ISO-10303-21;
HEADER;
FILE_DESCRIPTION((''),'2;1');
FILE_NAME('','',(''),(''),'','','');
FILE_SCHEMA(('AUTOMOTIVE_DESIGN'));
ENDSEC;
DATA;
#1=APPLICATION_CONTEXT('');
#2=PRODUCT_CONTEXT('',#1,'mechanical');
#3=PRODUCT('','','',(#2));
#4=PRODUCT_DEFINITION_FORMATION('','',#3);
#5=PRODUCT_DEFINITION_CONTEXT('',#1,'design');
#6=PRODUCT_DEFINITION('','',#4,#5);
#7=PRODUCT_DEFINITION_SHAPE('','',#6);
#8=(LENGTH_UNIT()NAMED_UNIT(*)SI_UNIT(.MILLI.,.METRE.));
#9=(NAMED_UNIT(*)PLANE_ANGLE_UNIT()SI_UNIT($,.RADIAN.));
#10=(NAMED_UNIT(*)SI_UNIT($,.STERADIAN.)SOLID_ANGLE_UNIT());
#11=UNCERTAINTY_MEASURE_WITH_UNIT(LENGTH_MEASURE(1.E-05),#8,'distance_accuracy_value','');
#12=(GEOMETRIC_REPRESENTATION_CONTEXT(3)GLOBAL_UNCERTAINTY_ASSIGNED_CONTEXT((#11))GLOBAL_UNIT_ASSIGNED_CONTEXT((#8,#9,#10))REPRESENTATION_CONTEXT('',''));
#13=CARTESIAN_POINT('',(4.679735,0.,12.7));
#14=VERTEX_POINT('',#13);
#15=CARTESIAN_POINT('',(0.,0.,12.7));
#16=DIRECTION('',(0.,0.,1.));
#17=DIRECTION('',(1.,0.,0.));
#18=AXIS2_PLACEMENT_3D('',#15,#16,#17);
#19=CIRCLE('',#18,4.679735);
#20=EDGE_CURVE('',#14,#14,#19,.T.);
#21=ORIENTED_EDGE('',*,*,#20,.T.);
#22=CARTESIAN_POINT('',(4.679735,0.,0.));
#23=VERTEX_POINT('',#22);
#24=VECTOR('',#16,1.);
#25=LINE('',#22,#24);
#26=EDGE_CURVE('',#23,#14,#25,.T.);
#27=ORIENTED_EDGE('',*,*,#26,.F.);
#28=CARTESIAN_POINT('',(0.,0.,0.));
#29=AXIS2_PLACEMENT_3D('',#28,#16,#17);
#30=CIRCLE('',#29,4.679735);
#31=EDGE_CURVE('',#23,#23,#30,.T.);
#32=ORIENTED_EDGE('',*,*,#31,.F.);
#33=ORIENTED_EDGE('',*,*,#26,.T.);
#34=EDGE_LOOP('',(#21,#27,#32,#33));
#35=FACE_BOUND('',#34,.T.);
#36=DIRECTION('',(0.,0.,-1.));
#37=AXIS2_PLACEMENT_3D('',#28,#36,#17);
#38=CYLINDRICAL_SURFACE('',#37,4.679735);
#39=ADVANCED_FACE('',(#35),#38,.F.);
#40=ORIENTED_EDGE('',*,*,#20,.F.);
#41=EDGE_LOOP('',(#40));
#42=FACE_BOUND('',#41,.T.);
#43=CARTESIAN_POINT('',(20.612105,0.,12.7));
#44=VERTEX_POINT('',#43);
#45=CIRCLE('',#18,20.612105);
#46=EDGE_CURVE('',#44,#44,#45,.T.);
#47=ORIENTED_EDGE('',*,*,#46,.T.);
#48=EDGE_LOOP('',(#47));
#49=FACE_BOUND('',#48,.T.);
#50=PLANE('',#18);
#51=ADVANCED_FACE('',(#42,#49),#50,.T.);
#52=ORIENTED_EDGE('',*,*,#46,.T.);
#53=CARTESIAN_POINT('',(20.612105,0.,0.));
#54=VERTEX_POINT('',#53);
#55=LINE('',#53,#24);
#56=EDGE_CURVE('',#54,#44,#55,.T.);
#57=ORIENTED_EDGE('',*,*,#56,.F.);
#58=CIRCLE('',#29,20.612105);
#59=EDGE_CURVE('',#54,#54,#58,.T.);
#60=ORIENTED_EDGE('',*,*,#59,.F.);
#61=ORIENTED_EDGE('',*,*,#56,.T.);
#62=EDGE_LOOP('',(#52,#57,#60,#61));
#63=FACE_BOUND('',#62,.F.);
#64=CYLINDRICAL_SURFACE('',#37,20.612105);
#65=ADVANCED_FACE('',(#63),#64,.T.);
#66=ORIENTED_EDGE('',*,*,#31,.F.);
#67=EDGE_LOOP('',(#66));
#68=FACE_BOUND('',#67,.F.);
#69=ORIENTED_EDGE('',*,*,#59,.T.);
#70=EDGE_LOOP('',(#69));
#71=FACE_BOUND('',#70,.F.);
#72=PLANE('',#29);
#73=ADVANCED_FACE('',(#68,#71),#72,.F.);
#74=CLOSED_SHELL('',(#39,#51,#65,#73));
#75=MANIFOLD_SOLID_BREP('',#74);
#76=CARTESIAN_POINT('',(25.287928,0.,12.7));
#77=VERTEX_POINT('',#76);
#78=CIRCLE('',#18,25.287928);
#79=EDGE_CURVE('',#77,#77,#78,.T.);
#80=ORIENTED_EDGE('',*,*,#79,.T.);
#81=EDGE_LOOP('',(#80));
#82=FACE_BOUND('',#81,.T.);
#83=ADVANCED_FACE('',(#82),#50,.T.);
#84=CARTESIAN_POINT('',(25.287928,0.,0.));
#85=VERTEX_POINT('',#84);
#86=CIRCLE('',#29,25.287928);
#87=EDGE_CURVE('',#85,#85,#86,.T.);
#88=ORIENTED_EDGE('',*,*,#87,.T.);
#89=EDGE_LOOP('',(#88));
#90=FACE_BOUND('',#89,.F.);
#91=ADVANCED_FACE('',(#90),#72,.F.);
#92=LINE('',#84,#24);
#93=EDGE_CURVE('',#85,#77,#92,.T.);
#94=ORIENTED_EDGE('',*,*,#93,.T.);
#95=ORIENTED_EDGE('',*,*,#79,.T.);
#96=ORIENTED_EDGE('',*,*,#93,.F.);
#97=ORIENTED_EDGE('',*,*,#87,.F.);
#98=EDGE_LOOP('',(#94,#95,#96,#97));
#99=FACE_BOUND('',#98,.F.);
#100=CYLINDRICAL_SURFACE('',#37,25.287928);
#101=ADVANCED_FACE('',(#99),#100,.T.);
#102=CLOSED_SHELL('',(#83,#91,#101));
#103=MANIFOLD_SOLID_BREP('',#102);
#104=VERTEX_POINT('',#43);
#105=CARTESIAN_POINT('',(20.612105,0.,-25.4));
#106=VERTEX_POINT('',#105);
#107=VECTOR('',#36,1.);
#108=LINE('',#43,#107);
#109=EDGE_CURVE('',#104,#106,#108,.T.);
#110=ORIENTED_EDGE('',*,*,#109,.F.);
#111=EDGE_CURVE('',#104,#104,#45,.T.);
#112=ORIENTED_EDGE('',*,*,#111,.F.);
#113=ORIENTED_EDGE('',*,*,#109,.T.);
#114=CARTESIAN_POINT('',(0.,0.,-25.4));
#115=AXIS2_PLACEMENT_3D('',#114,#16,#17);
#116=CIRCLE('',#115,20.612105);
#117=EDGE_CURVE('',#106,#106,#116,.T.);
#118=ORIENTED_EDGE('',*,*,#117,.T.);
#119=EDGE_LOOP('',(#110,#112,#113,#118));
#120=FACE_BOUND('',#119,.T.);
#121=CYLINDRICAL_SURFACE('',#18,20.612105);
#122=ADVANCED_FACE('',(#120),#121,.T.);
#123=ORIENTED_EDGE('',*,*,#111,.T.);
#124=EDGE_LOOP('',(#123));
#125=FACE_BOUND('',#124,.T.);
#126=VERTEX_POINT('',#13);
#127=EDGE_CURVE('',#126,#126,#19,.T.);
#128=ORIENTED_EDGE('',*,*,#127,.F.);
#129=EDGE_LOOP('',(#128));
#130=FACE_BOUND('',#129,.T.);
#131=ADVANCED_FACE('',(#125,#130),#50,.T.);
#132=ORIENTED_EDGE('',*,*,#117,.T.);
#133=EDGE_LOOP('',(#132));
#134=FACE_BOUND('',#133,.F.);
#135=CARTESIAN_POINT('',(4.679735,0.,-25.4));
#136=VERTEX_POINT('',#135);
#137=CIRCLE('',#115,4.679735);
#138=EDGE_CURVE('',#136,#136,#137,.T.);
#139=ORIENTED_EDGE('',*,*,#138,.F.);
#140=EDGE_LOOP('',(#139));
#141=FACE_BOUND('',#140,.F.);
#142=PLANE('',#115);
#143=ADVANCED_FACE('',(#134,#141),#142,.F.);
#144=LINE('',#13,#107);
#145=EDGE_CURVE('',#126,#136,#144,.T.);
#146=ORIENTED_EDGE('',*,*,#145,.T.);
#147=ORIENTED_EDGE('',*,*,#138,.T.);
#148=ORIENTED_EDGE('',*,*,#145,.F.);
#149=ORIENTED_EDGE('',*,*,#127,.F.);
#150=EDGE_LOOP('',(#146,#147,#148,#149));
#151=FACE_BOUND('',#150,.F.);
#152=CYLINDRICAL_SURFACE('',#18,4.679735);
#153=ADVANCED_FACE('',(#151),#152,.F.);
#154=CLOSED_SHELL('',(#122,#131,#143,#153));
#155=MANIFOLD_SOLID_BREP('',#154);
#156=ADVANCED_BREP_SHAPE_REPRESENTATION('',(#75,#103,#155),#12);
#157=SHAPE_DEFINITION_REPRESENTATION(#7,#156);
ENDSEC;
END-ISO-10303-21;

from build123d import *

# Parameters (mm, degrees)
F0_R     = 25.287927835
F0_R_2   = 25.2654785995
F2_DEPTH = 12.7
F1_R     = 20.6121053544
F1_R_2   = 4.679734569
F3_DEPTH = 38.1


# Not quite as in the source:
# - a feature of the source that left no trace in its solid (it failed there, or was rolled back) is left out
# - a feature names something its author has since deleted; it is built from what else it names


with BuildPart() as f2:
    # F0 (on Top) → F2 (new body)
    with BuildSketch(Plane.XY):
        Circle(F0_R)
        Circle(F0_R_2, mode=Mode.SUBTRACT)
        Circle(F0_R_2)
    extrude(amount=F2_DEPTH)


with BuildPart() as f2b:
    # F1 (on Top) → F2, piece 2 (new body)
    with BuildSketch(Plane.XY):
        Circle(F1_R)
        Circle(F1_R_2, mode=Mode.SUBTRACT)
    extrude(amount=F2_DEPTH)


with BuildPart() as f3:
    # F3 (new): a face of the model
    f3_faces = [f2b.part.faces().sort_by_distance(p)[0] for p in [
        (-20.0291069756, 0, 12.7),
    ]]
    extrude(f3_faces, amount=-F3_DEPTH)


solid = Compound([f2.part, f2b.part, f3.part])
